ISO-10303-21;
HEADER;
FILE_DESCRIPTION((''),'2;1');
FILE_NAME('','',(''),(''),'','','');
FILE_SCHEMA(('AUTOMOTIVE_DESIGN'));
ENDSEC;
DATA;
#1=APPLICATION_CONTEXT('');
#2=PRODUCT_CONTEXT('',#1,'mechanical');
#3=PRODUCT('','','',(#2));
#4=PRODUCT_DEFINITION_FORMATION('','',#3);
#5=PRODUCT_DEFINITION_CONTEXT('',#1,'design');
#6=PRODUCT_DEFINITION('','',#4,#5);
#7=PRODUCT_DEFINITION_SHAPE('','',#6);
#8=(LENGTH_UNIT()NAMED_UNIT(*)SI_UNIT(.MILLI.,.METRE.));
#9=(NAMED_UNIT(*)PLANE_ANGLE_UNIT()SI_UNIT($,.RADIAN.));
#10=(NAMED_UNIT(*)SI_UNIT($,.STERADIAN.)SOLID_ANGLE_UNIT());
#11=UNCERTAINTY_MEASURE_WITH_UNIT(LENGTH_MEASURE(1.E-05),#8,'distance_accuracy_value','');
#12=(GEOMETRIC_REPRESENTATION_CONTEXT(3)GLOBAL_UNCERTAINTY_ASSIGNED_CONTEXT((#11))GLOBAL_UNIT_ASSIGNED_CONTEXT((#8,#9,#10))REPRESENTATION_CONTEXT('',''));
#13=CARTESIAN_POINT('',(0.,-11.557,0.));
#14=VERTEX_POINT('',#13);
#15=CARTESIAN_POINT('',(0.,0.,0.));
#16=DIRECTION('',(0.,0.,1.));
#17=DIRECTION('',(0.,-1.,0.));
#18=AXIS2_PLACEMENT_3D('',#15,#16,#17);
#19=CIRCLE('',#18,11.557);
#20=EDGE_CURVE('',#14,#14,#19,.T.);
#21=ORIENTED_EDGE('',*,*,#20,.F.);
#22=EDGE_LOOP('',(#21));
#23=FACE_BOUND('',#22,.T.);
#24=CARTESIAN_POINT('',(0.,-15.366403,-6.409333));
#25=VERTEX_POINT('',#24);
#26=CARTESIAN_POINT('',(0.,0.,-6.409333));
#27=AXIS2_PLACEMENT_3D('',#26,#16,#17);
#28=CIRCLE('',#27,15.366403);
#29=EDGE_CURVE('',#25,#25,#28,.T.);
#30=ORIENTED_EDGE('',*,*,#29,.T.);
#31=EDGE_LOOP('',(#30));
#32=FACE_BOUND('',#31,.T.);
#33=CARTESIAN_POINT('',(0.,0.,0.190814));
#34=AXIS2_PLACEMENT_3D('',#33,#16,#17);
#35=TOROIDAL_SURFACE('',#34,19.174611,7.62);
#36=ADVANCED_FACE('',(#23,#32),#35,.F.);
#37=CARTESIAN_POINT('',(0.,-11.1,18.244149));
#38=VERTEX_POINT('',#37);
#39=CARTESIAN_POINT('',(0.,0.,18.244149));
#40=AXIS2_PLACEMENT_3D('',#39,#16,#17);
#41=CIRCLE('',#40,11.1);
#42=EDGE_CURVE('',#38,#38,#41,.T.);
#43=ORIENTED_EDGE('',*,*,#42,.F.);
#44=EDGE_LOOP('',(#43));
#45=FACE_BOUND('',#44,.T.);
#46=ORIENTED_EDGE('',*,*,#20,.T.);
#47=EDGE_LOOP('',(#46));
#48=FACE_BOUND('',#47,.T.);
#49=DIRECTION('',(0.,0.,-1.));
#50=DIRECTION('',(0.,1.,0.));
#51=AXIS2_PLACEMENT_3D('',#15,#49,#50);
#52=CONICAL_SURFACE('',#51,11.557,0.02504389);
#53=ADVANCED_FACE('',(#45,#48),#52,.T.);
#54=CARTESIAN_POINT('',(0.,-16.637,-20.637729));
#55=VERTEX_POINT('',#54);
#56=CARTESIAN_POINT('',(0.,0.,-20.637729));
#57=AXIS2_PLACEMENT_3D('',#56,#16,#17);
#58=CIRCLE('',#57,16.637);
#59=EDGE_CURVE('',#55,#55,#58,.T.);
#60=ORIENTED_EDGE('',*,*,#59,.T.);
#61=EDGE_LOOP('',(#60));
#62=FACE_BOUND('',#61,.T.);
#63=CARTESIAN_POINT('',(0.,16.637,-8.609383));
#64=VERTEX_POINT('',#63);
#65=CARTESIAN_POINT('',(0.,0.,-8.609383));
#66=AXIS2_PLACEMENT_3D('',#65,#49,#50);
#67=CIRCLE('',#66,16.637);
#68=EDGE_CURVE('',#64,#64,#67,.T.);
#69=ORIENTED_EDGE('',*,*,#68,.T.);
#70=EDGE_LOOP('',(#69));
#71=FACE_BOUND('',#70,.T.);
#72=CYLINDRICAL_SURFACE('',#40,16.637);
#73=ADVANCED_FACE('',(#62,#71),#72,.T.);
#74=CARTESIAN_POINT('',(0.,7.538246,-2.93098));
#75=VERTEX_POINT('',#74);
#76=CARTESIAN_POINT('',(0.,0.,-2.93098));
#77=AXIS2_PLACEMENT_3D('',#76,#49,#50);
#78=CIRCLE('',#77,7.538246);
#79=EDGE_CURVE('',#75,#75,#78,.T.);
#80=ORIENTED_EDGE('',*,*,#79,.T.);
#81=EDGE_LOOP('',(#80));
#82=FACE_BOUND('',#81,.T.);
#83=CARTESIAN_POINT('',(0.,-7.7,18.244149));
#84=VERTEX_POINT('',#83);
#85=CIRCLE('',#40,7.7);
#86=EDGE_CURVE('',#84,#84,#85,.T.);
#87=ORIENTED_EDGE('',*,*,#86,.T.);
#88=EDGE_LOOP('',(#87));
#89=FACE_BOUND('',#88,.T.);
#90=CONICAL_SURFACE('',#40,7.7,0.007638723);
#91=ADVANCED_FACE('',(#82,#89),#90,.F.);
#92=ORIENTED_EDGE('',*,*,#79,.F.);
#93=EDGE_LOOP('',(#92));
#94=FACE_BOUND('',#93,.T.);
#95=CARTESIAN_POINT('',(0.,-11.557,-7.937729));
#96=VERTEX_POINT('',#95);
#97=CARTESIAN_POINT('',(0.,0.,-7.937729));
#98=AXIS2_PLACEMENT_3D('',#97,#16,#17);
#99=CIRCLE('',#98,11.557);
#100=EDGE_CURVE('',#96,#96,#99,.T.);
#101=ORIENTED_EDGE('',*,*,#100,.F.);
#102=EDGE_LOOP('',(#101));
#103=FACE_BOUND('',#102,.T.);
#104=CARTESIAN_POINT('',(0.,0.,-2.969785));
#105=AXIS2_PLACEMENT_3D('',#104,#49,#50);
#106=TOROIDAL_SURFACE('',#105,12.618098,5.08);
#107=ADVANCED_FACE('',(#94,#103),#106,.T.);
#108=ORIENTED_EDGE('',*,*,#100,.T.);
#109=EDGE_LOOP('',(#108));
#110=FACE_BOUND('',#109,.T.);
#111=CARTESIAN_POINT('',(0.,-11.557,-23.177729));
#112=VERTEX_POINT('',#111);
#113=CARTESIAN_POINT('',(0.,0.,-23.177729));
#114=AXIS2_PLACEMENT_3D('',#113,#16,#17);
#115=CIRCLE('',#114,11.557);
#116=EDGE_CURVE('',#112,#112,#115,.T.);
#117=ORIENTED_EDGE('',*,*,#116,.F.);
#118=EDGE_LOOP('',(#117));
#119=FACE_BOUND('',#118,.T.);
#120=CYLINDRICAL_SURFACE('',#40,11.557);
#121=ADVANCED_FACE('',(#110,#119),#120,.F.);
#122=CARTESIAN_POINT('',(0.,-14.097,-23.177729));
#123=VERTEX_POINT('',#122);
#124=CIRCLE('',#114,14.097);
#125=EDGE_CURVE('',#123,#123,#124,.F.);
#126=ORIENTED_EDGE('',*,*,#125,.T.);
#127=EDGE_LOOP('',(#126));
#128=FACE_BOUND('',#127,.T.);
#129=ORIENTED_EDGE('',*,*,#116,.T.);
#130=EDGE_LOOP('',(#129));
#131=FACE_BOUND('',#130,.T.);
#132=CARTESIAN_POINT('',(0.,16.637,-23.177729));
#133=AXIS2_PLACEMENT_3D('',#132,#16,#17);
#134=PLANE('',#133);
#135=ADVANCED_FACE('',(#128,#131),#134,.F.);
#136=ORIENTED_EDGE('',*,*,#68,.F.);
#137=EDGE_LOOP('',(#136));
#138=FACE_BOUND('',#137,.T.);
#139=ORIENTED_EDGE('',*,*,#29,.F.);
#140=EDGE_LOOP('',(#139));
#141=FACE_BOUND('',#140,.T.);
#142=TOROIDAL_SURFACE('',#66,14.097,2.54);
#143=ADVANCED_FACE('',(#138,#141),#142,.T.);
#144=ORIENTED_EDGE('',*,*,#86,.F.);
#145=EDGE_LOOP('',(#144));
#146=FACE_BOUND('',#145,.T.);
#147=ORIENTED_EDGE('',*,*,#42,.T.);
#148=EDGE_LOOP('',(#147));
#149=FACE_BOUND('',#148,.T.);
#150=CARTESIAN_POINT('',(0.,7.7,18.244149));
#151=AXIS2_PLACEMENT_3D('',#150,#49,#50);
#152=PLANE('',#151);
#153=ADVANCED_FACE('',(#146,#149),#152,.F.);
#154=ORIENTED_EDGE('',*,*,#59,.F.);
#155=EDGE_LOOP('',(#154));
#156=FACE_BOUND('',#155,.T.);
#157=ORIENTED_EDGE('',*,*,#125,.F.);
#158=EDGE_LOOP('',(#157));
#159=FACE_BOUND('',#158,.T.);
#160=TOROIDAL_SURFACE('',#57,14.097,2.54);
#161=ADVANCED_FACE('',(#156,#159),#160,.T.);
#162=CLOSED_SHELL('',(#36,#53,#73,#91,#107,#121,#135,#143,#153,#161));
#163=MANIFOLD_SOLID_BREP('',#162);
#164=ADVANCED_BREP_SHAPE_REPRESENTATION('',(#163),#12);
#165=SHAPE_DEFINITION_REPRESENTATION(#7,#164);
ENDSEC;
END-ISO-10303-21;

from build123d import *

# Parameters (mm, degrees)
FILLET1_R = 5.08
FILLET2_R = 2.54


with BuildPart() as part:
    # Sketch1 → Revolve1 (revolve)
    with BuildSketch(Plane(origin=(0, 0, 0), x_dir=(0, 0, -1), z_dir=(1, 0, 0)), mode=Mode.PRIVATE) as revolve1_sk:
        with BuildLine():
            Line((-18.244148936, 11.1), (0, 11.557))
            ThreePointArc((0, 11.557), (4.287180767, 13.00922662), (6.994234772, 16.637))
            Line((6.994234772, 16.637), (23.177729058, 16.637))
            Line((23.177729058, 16.637), (23.177729058, 11.557))
            Line((23.177729058, 11.557), (7.937729058, 11.557))
            Line((7.937729058, 11.557), (7.937729058, 7.5))
            Line((7.937729058, 7.5), (-18.244148936, 7.7))
            Line((-18.244148936, 7.7), (-18.244148936, 11.1))
        make_face()
    revolve(revolve1_sk.sketch.rotate(Axis((0, 0, 18.244148936), (0, 0, -1)), 180), axis=Axis((0, 0, 18.244148936), (0, 0, -1)))

    # Fillet1
    # the kernel refuses this fillet: 5.08 mm, written as the material it takes off along each edge
    with BuildSketch(Plane(origin=(0, 0, -7.937729058), x_dir=(0, -1, 0), z_dir=(1, 0, 0))) as fillet1_piece_1:
        with BuildLine():
            CenterArc((12.618097701, -4.967944411), FILLET1_R, 102.056579011, 78.38108757)
            Line((7.53824591, -5.006748745), (7.436648874, -5.007524832))
            Line((7.436648874, -5.007524832), (7.398402964, -0.000776087))
            Line((7.398402964, -0.000776087), (7.5, 0.1016))
            ThreePointArc((7.5, 0.1016), (9.5285, 0.1016), (11.535778046, 0.099358888))
            Line((11.535778046, 0.099358888), (11.557, 0))
        make_face()
    revolve(axis=Axis((0, 0, -7.937729058), (0, 0, -1)), mode=Mode.SUBTRACT)

    # Fillet2
    fillet2_edges = [part.edges().sort_by_distance(p)[0] for p in [
        (0, 16.637, -23.177729058),
        (0, 16.637, -6.994234772),
    ]]
    fillet(fillet2_edges, radius=FILLET2_R)


solid = part.part
